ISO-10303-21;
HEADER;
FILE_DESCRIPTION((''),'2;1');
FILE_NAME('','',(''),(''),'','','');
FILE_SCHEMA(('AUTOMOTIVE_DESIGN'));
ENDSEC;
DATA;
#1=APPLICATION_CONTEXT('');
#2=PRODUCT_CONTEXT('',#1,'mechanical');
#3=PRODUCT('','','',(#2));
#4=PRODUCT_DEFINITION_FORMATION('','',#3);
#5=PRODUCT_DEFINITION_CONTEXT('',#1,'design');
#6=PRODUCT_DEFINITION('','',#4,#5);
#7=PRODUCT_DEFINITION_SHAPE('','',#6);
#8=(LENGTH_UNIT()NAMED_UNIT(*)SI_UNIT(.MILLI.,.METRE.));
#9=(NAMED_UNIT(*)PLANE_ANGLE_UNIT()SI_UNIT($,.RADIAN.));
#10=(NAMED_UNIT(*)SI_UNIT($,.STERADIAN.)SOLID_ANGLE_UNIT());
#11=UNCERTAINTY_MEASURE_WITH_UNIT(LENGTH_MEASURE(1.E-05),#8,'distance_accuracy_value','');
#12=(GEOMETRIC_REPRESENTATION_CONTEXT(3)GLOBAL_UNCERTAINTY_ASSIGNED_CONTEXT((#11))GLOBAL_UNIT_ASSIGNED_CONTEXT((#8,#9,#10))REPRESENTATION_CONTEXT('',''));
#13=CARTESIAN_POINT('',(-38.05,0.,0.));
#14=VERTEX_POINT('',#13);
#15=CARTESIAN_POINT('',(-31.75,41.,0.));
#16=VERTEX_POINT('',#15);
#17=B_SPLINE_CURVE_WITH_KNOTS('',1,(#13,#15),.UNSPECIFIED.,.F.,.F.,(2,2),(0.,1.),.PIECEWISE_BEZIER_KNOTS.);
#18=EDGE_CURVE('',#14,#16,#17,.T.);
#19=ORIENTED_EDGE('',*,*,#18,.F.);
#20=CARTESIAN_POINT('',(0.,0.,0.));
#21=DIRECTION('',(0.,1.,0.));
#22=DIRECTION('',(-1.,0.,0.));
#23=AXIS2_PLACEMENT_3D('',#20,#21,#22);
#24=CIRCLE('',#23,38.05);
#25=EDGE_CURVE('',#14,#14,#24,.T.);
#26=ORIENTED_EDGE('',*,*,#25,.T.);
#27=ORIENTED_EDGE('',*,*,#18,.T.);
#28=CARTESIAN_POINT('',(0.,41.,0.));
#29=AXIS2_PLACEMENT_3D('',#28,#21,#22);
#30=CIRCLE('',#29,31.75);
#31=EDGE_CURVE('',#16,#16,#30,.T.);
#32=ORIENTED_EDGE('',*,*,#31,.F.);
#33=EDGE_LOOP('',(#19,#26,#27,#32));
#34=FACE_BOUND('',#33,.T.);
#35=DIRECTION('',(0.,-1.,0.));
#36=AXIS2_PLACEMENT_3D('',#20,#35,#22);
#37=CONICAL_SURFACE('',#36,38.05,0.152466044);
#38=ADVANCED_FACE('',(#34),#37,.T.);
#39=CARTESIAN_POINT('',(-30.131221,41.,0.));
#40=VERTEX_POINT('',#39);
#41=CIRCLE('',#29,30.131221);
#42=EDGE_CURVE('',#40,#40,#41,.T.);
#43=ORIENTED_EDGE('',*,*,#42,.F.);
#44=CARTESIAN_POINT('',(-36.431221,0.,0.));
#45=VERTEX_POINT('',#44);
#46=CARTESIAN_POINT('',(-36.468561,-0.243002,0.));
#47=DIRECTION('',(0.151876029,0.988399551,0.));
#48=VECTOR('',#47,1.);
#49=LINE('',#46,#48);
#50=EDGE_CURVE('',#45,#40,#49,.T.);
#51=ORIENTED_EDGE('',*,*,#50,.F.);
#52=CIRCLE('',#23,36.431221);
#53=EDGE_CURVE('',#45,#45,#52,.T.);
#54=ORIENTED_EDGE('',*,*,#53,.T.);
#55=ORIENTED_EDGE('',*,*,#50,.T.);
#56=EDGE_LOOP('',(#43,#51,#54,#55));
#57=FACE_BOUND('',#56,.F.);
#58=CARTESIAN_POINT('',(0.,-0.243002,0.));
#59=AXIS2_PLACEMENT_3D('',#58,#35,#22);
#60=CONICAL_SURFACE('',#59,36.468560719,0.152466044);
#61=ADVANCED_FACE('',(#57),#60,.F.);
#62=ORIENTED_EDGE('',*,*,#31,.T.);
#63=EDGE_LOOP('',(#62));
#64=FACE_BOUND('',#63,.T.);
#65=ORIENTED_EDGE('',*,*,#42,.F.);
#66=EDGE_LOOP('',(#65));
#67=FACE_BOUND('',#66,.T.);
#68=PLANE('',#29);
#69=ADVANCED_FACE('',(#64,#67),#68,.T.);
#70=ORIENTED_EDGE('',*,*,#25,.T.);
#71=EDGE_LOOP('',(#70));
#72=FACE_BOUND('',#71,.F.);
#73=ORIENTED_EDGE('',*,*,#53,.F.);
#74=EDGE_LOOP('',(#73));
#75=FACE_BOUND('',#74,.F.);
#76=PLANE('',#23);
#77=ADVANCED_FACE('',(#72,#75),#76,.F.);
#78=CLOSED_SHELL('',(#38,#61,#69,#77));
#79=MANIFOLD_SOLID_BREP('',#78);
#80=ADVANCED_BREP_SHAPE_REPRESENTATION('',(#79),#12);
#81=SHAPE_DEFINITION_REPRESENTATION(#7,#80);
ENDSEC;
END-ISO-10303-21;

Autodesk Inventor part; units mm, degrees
ref_plane "YZ Plane" through (0, 0, 0) normal (1, 0, 0) x (0, 1, 0)
ref_plane "XY Plane" through (0, 0, 0) normal (0, 0, 1) x (1, 0, 0)
sketch "Szkic6" plane through (0, 0, 0) normal (0, 1, 0) x (-1, 0, 0)
  circle A0 centre (0, 0) radius 38.05
  dimension "d33" = 76.1
ref_plane "Płaszczyzna konstrukcyjna1" through (0, 41, 0) normal (0, 1, 0) x (-1, 0, 0)
sketch "Szkic7" plane through (0, 41, 0) normal (0, 1, 0) x (-1, 0, 0)
  circle A0 centre (0, 0) radius 31.75
  dimension "d35" = 63.5
loft "Wyciągnięcie złożone1" add profiles "Szkic6", "Szkic7"
shell "Skorupa1" thickness 1.6 removed faces 2 at (14.3997, 41, 5.5289) at (-5.8996, 0, 7.9079)
equation "\"d33\" = OD1"
equation "\"d35\" = OD2"
equation "\"d52\" = THK"
equation "\"SzerokośćGięciaPodcięcia\" = Grubość"
equation "\"RozmiarPodcięciaNarożnika\" = 4 * Grubość"
equation "\"PromieńPrzejścia\" = PromieńGięcia"
equation "\"Rozmiar_promienia_Jacobiego\" = PromieńGięcia"
equation "\"Wielk_odstępu\" = Grubość"
equation "\"d2\" = PromieńGięcia"
equation "\"d23\" = PromieńGięcia"
equation "\"OD1\" = 76.1"
equation "\"OD2\" = 63.5"
equation "\"L\" = 41"
equation "\"THK\" = 1.6"
equation "\"d34\" = L"
equation "\"Grubość\" = 1.5"
equation "\"PromieńGięcia\" = 3"
properties part number "Redukcja symetryczna Ø76,1x63,5x1,6 L=41" material "304"
